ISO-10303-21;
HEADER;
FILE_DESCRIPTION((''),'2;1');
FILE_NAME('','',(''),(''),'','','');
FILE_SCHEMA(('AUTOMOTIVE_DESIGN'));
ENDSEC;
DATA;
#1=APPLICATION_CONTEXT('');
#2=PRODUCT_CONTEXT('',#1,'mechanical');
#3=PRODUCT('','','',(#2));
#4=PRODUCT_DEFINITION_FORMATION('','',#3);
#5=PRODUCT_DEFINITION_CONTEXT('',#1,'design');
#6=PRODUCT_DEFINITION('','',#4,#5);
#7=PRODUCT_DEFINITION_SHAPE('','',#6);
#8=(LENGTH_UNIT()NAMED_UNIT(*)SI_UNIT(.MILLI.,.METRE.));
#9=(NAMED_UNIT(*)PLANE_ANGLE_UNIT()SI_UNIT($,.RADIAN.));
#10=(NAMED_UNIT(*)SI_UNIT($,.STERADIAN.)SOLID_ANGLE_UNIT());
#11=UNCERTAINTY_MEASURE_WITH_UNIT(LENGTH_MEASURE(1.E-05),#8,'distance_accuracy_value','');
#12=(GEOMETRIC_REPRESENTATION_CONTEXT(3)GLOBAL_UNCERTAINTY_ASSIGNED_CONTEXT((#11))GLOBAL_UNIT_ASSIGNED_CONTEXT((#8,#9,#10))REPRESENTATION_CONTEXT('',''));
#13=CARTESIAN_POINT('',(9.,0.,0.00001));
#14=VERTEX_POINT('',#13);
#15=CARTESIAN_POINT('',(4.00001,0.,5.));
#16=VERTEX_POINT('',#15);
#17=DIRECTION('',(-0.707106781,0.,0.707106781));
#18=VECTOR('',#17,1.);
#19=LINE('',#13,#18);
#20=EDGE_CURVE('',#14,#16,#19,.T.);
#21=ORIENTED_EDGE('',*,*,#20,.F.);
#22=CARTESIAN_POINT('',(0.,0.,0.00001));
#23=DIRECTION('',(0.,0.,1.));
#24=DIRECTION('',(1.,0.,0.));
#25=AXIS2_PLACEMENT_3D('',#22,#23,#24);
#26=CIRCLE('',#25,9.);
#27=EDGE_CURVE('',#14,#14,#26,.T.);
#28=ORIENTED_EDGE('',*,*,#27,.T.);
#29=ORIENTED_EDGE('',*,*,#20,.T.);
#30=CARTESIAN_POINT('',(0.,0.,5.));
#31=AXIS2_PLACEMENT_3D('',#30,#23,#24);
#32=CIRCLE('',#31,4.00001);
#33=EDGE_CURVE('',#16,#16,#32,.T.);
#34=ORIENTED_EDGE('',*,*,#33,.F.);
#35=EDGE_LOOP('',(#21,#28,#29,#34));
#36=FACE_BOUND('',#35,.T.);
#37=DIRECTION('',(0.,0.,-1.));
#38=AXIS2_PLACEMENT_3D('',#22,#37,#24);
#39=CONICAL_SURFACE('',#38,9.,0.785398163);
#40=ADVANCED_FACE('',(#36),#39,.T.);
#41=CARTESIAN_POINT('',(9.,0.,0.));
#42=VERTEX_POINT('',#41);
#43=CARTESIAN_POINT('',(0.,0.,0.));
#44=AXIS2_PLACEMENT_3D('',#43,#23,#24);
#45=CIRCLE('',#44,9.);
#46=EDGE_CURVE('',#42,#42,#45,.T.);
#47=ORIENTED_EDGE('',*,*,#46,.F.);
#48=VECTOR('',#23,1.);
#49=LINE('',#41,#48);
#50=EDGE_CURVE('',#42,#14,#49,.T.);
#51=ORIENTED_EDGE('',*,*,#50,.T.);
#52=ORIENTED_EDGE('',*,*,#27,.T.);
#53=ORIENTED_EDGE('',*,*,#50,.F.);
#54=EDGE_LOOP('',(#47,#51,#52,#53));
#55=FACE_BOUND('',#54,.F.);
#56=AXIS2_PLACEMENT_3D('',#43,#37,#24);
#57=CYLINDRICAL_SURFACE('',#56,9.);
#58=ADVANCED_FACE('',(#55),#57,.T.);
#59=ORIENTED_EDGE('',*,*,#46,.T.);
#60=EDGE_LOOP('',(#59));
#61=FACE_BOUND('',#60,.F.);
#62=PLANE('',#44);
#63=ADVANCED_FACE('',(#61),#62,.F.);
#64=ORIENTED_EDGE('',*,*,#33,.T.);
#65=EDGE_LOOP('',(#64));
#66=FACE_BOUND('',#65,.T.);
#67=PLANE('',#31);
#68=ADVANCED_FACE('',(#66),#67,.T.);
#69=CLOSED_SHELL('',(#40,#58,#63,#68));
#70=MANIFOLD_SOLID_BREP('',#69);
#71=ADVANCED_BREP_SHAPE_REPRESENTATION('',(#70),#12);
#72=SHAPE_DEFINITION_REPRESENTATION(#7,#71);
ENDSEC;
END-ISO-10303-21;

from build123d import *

# Parameters (mm, degrees)
F2_R     = 9
F3_DEPTH = 5
F4_SIZE  = 4.99999


# Not quite as in the source:
# - a fillet or chamfer is up to 0.001 mm smaller than in the source, because OpenCascade refuses the exact size
# - a feature of the source that left no trace in its solid (it failed there, or was rolled back) is left out
# - the program builds the solid bodies; features that only make, move or delete a surface that nothing else refers to are left out


with BuildPart() as f3:
    # F2 (on Top) → F3 (new body)
    with BuildSketch(Plane.XY):
        Circle(F2_R)
    extrude(amount=F3_DEPTH)

    # F4 (size 5 in the source; OpenCascade refuses exactly that, so slightly less here)
    f4_edges = [f3.edges().sort_by_distance(p)[0] for p in [
        (-9, 0, 5),
    ]]
    chamfer(f4_edges, length=F4_SIZE)


solid = f3.part
